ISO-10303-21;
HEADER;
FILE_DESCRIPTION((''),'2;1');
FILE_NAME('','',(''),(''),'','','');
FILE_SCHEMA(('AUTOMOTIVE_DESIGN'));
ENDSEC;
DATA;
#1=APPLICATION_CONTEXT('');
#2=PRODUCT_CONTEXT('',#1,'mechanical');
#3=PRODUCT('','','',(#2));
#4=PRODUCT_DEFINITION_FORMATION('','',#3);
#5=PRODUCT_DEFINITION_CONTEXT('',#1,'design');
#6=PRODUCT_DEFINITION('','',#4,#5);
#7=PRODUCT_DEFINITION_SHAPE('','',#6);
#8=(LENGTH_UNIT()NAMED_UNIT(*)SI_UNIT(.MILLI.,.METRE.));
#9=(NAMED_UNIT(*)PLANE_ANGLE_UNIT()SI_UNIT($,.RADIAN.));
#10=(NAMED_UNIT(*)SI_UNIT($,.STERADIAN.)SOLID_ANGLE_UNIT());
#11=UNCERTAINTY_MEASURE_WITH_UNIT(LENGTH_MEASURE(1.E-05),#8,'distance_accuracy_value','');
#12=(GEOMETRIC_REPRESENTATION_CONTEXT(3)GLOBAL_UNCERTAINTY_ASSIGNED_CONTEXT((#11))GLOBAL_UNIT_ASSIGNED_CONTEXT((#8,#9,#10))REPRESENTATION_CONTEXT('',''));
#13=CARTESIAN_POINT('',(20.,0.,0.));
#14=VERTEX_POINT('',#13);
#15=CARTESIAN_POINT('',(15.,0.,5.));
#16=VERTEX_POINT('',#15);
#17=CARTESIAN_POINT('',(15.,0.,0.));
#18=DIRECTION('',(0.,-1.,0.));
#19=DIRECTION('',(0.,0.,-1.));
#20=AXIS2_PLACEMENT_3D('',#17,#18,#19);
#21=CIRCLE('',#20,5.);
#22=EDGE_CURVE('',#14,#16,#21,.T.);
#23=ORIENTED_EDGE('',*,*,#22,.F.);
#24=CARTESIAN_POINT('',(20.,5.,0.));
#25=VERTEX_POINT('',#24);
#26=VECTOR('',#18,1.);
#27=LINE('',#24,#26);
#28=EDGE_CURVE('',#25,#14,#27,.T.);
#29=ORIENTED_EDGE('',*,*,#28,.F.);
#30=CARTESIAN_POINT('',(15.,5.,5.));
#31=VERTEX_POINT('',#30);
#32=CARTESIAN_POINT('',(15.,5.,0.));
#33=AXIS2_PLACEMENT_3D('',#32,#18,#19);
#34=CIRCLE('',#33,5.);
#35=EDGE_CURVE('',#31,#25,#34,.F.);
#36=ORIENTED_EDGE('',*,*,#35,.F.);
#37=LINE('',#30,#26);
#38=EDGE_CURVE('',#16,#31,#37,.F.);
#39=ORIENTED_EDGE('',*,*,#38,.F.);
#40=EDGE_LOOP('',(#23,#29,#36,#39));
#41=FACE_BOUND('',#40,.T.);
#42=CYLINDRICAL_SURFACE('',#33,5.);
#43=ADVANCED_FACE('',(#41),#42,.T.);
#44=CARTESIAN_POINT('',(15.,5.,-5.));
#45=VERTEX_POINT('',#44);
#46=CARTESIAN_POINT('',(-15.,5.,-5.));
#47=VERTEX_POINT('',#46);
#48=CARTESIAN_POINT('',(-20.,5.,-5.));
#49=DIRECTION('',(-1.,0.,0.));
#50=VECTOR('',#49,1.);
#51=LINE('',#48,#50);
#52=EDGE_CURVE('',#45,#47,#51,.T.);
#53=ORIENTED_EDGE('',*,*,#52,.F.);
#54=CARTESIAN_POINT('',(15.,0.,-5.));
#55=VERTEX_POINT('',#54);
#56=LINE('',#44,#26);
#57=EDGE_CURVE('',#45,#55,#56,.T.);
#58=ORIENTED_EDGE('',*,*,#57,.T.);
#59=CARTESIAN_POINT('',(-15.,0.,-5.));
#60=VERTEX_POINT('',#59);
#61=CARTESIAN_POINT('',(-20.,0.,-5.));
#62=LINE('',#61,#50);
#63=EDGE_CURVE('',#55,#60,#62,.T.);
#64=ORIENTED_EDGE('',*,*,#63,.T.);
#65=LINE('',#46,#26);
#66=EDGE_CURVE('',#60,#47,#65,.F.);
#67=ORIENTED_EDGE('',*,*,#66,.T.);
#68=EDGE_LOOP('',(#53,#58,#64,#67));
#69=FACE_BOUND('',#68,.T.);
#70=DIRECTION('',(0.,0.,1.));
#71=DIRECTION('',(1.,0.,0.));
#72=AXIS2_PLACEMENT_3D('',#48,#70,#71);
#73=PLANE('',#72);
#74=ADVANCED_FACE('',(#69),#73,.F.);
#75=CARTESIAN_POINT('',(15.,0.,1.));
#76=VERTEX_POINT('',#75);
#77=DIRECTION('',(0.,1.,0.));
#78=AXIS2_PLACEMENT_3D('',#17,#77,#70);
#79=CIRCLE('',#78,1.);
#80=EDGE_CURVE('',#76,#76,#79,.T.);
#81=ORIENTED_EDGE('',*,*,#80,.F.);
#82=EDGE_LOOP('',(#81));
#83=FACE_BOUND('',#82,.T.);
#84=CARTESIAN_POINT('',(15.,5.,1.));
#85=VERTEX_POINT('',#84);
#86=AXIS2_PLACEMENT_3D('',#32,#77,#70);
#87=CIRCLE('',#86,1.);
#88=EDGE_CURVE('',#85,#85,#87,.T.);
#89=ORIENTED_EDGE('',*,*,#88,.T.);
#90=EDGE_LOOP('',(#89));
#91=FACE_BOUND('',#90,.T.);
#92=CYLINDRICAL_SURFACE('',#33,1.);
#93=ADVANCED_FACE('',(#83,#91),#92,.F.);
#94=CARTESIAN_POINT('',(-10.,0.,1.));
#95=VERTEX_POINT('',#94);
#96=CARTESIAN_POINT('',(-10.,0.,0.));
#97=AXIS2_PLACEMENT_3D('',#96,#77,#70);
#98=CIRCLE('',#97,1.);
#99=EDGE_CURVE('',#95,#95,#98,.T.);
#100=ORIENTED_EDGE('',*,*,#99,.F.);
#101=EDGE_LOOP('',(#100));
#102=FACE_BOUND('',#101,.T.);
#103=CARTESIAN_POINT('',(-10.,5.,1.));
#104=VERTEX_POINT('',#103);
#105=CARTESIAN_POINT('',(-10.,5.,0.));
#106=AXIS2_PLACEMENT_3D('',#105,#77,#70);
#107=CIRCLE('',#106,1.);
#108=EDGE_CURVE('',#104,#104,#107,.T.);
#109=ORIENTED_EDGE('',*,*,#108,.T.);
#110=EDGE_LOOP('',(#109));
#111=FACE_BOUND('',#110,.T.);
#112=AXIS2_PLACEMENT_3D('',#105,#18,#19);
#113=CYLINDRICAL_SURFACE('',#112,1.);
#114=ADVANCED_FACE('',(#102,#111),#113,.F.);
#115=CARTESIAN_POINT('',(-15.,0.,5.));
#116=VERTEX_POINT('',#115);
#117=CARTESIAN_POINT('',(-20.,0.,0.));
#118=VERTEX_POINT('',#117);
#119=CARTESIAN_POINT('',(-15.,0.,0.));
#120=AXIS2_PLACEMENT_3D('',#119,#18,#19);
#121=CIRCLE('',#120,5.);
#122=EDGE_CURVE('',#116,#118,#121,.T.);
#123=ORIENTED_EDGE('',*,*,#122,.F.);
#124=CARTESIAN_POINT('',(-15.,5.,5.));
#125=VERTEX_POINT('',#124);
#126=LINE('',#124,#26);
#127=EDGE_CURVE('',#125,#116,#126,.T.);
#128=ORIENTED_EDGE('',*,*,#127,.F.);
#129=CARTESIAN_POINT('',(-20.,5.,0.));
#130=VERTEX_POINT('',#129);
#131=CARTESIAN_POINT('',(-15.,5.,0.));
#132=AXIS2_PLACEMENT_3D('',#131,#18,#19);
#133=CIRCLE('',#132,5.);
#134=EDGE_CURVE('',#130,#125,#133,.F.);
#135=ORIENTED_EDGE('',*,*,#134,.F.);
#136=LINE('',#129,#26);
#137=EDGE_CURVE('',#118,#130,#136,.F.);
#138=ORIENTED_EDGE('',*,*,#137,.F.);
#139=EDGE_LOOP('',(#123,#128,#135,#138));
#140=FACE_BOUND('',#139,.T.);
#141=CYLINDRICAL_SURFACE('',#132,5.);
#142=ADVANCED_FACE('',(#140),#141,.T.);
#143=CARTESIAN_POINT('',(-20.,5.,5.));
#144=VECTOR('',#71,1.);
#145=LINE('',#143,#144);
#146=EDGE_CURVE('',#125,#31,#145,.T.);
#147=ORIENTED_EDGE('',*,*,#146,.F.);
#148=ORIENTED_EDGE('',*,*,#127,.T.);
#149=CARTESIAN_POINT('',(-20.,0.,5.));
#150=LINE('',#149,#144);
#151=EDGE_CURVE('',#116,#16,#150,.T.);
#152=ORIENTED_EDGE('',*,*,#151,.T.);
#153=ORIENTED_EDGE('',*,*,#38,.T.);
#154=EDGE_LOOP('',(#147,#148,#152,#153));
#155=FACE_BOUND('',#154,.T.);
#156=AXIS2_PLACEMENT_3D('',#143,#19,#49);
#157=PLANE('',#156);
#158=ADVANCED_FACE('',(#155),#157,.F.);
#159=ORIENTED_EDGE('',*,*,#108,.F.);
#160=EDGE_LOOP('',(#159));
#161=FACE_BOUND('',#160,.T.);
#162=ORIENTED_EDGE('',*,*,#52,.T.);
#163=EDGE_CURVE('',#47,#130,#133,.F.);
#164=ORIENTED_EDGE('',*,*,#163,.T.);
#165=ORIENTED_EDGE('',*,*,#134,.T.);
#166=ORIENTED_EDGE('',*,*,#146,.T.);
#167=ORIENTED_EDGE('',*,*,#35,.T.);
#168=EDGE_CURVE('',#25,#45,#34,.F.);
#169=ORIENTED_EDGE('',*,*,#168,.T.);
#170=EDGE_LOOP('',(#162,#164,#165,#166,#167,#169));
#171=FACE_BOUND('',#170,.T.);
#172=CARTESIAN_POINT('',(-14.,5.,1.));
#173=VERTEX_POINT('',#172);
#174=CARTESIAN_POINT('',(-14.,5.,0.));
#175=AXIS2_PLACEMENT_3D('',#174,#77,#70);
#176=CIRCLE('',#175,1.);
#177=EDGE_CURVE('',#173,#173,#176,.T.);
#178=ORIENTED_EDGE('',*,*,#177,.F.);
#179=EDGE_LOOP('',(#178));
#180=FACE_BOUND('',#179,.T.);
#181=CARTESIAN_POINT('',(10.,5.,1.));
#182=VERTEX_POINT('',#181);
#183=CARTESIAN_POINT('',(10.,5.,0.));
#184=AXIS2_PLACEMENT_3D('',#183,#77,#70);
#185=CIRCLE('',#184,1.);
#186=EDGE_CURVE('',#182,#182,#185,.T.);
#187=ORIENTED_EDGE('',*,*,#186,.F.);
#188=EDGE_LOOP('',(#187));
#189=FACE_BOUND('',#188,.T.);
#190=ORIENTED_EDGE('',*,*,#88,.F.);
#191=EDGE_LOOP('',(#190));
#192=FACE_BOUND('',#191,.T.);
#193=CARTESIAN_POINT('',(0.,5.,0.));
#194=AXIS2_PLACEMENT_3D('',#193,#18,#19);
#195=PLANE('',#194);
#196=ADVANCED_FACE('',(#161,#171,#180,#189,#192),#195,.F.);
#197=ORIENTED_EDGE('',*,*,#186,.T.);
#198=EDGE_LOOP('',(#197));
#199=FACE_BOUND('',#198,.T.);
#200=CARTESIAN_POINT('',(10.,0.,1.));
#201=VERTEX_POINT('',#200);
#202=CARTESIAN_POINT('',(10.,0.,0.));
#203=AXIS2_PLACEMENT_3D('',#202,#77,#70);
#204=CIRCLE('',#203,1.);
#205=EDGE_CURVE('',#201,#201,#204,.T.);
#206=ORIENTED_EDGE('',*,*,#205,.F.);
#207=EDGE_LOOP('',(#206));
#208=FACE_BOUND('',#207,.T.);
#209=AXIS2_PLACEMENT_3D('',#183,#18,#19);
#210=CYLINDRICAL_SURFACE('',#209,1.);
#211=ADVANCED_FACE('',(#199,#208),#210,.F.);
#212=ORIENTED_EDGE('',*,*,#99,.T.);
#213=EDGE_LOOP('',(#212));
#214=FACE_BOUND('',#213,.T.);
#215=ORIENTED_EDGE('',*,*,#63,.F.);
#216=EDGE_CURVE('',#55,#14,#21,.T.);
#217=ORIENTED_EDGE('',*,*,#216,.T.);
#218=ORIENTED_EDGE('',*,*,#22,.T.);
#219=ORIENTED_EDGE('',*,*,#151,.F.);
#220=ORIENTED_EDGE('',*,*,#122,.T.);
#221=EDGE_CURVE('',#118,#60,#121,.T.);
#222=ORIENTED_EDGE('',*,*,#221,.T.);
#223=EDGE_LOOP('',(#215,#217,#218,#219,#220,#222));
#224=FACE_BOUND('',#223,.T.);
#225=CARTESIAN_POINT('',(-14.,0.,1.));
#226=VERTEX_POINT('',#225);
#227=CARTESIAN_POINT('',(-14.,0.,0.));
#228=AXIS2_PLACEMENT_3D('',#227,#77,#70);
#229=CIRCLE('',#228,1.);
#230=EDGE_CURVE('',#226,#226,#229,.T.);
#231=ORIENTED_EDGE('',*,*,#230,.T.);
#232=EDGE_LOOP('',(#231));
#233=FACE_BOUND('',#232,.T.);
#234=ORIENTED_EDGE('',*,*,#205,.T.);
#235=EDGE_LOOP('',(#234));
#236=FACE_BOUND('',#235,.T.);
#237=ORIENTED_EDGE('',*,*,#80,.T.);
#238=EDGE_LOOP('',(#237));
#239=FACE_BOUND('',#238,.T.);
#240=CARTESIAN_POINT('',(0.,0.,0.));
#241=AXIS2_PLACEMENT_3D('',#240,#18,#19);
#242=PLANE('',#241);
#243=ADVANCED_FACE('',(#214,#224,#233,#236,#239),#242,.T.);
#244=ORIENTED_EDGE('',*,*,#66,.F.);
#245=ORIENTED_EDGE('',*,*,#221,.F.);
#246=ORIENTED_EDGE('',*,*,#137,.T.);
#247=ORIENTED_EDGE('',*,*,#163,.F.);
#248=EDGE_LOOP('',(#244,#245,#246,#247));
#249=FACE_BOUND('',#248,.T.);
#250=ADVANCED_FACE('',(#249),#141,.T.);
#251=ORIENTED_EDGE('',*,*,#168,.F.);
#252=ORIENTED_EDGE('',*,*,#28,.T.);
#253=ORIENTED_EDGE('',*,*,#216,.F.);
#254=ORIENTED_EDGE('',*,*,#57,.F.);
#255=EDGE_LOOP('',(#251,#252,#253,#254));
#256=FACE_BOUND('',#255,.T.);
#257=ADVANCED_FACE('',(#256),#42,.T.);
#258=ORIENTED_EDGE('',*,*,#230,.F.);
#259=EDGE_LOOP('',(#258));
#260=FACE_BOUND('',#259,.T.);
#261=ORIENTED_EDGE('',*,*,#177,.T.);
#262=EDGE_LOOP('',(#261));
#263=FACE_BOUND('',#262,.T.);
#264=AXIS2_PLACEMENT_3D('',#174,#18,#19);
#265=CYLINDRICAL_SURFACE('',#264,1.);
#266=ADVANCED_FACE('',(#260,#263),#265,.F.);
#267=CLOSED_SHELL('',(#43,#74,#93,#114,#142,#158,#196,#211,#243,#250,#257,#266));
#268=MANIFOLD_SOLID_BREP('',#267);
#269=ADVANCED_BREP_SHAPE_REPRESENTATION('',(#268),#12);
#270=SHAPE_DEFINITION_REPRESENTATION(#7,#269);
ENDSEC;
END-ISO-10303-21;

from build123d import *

# Parameters (mm, degrees)
SKETCH1_W           = 40
SKETCH1_H           = 10
BOSS_EXTRUDE1_DEPTH = 5
SKETCH2_R           = 1
CUT_EXTRUDE1_DEPTH  = 5
FILLET1_R           = 5


with BuildPart() as part:
    # Sketch1 → Boss-Extrude1 (new body)
    with BuildSketch(Plane(origin=(0, 0, 0), x_dir=(1, 0, 0), z_dir=(0, 1, 0))):
        Rectangle(SKETCH1_W, SKETCH1_H)
    extrude(amount=BOSS_EXTRUDE1_DEPTH)

    # Sketch2 → Cut-Extrude1 (cut)
    with BuildSketch(Plane(origin=(0, 0, 0), x_dir=(1, 0, 0), z_dir=(0, 1, 0))):
        with Locations(Location((10, 0, 0), (0, 0, 270))):
            Circle(SKETCH2_R)
        with Locations(Location((15, 0, 0), (0, 0, 270))):
            Circle(SKETCH2_R)
        with Locations(Location((-10, 0, 0), (0, 0, 270))):
            Circle(SKETCH2_R)
        with Locations(Location((-14, 0, 0), (0, 0, 270))):
            Circle(SKETCH2_R)
    extrude(amount=CUT_EXTRUDE1_DEPTH, mode=Mode.SUBTRACT)

    # Fillet1
    fillet1_edges = [part.edges().sort_by_distance(p)[0] for p in [
        (20, 2.5, -5),
        (-20, 2.5, -5),
        (20, 2.5, 5),
        (-20, 2.5, 5),
    ]]
    fillet(fillet1_edges, radius=FILLET1_R - 0.0001)  # a hair under: the kernel refuses the full size


solid = part.part
